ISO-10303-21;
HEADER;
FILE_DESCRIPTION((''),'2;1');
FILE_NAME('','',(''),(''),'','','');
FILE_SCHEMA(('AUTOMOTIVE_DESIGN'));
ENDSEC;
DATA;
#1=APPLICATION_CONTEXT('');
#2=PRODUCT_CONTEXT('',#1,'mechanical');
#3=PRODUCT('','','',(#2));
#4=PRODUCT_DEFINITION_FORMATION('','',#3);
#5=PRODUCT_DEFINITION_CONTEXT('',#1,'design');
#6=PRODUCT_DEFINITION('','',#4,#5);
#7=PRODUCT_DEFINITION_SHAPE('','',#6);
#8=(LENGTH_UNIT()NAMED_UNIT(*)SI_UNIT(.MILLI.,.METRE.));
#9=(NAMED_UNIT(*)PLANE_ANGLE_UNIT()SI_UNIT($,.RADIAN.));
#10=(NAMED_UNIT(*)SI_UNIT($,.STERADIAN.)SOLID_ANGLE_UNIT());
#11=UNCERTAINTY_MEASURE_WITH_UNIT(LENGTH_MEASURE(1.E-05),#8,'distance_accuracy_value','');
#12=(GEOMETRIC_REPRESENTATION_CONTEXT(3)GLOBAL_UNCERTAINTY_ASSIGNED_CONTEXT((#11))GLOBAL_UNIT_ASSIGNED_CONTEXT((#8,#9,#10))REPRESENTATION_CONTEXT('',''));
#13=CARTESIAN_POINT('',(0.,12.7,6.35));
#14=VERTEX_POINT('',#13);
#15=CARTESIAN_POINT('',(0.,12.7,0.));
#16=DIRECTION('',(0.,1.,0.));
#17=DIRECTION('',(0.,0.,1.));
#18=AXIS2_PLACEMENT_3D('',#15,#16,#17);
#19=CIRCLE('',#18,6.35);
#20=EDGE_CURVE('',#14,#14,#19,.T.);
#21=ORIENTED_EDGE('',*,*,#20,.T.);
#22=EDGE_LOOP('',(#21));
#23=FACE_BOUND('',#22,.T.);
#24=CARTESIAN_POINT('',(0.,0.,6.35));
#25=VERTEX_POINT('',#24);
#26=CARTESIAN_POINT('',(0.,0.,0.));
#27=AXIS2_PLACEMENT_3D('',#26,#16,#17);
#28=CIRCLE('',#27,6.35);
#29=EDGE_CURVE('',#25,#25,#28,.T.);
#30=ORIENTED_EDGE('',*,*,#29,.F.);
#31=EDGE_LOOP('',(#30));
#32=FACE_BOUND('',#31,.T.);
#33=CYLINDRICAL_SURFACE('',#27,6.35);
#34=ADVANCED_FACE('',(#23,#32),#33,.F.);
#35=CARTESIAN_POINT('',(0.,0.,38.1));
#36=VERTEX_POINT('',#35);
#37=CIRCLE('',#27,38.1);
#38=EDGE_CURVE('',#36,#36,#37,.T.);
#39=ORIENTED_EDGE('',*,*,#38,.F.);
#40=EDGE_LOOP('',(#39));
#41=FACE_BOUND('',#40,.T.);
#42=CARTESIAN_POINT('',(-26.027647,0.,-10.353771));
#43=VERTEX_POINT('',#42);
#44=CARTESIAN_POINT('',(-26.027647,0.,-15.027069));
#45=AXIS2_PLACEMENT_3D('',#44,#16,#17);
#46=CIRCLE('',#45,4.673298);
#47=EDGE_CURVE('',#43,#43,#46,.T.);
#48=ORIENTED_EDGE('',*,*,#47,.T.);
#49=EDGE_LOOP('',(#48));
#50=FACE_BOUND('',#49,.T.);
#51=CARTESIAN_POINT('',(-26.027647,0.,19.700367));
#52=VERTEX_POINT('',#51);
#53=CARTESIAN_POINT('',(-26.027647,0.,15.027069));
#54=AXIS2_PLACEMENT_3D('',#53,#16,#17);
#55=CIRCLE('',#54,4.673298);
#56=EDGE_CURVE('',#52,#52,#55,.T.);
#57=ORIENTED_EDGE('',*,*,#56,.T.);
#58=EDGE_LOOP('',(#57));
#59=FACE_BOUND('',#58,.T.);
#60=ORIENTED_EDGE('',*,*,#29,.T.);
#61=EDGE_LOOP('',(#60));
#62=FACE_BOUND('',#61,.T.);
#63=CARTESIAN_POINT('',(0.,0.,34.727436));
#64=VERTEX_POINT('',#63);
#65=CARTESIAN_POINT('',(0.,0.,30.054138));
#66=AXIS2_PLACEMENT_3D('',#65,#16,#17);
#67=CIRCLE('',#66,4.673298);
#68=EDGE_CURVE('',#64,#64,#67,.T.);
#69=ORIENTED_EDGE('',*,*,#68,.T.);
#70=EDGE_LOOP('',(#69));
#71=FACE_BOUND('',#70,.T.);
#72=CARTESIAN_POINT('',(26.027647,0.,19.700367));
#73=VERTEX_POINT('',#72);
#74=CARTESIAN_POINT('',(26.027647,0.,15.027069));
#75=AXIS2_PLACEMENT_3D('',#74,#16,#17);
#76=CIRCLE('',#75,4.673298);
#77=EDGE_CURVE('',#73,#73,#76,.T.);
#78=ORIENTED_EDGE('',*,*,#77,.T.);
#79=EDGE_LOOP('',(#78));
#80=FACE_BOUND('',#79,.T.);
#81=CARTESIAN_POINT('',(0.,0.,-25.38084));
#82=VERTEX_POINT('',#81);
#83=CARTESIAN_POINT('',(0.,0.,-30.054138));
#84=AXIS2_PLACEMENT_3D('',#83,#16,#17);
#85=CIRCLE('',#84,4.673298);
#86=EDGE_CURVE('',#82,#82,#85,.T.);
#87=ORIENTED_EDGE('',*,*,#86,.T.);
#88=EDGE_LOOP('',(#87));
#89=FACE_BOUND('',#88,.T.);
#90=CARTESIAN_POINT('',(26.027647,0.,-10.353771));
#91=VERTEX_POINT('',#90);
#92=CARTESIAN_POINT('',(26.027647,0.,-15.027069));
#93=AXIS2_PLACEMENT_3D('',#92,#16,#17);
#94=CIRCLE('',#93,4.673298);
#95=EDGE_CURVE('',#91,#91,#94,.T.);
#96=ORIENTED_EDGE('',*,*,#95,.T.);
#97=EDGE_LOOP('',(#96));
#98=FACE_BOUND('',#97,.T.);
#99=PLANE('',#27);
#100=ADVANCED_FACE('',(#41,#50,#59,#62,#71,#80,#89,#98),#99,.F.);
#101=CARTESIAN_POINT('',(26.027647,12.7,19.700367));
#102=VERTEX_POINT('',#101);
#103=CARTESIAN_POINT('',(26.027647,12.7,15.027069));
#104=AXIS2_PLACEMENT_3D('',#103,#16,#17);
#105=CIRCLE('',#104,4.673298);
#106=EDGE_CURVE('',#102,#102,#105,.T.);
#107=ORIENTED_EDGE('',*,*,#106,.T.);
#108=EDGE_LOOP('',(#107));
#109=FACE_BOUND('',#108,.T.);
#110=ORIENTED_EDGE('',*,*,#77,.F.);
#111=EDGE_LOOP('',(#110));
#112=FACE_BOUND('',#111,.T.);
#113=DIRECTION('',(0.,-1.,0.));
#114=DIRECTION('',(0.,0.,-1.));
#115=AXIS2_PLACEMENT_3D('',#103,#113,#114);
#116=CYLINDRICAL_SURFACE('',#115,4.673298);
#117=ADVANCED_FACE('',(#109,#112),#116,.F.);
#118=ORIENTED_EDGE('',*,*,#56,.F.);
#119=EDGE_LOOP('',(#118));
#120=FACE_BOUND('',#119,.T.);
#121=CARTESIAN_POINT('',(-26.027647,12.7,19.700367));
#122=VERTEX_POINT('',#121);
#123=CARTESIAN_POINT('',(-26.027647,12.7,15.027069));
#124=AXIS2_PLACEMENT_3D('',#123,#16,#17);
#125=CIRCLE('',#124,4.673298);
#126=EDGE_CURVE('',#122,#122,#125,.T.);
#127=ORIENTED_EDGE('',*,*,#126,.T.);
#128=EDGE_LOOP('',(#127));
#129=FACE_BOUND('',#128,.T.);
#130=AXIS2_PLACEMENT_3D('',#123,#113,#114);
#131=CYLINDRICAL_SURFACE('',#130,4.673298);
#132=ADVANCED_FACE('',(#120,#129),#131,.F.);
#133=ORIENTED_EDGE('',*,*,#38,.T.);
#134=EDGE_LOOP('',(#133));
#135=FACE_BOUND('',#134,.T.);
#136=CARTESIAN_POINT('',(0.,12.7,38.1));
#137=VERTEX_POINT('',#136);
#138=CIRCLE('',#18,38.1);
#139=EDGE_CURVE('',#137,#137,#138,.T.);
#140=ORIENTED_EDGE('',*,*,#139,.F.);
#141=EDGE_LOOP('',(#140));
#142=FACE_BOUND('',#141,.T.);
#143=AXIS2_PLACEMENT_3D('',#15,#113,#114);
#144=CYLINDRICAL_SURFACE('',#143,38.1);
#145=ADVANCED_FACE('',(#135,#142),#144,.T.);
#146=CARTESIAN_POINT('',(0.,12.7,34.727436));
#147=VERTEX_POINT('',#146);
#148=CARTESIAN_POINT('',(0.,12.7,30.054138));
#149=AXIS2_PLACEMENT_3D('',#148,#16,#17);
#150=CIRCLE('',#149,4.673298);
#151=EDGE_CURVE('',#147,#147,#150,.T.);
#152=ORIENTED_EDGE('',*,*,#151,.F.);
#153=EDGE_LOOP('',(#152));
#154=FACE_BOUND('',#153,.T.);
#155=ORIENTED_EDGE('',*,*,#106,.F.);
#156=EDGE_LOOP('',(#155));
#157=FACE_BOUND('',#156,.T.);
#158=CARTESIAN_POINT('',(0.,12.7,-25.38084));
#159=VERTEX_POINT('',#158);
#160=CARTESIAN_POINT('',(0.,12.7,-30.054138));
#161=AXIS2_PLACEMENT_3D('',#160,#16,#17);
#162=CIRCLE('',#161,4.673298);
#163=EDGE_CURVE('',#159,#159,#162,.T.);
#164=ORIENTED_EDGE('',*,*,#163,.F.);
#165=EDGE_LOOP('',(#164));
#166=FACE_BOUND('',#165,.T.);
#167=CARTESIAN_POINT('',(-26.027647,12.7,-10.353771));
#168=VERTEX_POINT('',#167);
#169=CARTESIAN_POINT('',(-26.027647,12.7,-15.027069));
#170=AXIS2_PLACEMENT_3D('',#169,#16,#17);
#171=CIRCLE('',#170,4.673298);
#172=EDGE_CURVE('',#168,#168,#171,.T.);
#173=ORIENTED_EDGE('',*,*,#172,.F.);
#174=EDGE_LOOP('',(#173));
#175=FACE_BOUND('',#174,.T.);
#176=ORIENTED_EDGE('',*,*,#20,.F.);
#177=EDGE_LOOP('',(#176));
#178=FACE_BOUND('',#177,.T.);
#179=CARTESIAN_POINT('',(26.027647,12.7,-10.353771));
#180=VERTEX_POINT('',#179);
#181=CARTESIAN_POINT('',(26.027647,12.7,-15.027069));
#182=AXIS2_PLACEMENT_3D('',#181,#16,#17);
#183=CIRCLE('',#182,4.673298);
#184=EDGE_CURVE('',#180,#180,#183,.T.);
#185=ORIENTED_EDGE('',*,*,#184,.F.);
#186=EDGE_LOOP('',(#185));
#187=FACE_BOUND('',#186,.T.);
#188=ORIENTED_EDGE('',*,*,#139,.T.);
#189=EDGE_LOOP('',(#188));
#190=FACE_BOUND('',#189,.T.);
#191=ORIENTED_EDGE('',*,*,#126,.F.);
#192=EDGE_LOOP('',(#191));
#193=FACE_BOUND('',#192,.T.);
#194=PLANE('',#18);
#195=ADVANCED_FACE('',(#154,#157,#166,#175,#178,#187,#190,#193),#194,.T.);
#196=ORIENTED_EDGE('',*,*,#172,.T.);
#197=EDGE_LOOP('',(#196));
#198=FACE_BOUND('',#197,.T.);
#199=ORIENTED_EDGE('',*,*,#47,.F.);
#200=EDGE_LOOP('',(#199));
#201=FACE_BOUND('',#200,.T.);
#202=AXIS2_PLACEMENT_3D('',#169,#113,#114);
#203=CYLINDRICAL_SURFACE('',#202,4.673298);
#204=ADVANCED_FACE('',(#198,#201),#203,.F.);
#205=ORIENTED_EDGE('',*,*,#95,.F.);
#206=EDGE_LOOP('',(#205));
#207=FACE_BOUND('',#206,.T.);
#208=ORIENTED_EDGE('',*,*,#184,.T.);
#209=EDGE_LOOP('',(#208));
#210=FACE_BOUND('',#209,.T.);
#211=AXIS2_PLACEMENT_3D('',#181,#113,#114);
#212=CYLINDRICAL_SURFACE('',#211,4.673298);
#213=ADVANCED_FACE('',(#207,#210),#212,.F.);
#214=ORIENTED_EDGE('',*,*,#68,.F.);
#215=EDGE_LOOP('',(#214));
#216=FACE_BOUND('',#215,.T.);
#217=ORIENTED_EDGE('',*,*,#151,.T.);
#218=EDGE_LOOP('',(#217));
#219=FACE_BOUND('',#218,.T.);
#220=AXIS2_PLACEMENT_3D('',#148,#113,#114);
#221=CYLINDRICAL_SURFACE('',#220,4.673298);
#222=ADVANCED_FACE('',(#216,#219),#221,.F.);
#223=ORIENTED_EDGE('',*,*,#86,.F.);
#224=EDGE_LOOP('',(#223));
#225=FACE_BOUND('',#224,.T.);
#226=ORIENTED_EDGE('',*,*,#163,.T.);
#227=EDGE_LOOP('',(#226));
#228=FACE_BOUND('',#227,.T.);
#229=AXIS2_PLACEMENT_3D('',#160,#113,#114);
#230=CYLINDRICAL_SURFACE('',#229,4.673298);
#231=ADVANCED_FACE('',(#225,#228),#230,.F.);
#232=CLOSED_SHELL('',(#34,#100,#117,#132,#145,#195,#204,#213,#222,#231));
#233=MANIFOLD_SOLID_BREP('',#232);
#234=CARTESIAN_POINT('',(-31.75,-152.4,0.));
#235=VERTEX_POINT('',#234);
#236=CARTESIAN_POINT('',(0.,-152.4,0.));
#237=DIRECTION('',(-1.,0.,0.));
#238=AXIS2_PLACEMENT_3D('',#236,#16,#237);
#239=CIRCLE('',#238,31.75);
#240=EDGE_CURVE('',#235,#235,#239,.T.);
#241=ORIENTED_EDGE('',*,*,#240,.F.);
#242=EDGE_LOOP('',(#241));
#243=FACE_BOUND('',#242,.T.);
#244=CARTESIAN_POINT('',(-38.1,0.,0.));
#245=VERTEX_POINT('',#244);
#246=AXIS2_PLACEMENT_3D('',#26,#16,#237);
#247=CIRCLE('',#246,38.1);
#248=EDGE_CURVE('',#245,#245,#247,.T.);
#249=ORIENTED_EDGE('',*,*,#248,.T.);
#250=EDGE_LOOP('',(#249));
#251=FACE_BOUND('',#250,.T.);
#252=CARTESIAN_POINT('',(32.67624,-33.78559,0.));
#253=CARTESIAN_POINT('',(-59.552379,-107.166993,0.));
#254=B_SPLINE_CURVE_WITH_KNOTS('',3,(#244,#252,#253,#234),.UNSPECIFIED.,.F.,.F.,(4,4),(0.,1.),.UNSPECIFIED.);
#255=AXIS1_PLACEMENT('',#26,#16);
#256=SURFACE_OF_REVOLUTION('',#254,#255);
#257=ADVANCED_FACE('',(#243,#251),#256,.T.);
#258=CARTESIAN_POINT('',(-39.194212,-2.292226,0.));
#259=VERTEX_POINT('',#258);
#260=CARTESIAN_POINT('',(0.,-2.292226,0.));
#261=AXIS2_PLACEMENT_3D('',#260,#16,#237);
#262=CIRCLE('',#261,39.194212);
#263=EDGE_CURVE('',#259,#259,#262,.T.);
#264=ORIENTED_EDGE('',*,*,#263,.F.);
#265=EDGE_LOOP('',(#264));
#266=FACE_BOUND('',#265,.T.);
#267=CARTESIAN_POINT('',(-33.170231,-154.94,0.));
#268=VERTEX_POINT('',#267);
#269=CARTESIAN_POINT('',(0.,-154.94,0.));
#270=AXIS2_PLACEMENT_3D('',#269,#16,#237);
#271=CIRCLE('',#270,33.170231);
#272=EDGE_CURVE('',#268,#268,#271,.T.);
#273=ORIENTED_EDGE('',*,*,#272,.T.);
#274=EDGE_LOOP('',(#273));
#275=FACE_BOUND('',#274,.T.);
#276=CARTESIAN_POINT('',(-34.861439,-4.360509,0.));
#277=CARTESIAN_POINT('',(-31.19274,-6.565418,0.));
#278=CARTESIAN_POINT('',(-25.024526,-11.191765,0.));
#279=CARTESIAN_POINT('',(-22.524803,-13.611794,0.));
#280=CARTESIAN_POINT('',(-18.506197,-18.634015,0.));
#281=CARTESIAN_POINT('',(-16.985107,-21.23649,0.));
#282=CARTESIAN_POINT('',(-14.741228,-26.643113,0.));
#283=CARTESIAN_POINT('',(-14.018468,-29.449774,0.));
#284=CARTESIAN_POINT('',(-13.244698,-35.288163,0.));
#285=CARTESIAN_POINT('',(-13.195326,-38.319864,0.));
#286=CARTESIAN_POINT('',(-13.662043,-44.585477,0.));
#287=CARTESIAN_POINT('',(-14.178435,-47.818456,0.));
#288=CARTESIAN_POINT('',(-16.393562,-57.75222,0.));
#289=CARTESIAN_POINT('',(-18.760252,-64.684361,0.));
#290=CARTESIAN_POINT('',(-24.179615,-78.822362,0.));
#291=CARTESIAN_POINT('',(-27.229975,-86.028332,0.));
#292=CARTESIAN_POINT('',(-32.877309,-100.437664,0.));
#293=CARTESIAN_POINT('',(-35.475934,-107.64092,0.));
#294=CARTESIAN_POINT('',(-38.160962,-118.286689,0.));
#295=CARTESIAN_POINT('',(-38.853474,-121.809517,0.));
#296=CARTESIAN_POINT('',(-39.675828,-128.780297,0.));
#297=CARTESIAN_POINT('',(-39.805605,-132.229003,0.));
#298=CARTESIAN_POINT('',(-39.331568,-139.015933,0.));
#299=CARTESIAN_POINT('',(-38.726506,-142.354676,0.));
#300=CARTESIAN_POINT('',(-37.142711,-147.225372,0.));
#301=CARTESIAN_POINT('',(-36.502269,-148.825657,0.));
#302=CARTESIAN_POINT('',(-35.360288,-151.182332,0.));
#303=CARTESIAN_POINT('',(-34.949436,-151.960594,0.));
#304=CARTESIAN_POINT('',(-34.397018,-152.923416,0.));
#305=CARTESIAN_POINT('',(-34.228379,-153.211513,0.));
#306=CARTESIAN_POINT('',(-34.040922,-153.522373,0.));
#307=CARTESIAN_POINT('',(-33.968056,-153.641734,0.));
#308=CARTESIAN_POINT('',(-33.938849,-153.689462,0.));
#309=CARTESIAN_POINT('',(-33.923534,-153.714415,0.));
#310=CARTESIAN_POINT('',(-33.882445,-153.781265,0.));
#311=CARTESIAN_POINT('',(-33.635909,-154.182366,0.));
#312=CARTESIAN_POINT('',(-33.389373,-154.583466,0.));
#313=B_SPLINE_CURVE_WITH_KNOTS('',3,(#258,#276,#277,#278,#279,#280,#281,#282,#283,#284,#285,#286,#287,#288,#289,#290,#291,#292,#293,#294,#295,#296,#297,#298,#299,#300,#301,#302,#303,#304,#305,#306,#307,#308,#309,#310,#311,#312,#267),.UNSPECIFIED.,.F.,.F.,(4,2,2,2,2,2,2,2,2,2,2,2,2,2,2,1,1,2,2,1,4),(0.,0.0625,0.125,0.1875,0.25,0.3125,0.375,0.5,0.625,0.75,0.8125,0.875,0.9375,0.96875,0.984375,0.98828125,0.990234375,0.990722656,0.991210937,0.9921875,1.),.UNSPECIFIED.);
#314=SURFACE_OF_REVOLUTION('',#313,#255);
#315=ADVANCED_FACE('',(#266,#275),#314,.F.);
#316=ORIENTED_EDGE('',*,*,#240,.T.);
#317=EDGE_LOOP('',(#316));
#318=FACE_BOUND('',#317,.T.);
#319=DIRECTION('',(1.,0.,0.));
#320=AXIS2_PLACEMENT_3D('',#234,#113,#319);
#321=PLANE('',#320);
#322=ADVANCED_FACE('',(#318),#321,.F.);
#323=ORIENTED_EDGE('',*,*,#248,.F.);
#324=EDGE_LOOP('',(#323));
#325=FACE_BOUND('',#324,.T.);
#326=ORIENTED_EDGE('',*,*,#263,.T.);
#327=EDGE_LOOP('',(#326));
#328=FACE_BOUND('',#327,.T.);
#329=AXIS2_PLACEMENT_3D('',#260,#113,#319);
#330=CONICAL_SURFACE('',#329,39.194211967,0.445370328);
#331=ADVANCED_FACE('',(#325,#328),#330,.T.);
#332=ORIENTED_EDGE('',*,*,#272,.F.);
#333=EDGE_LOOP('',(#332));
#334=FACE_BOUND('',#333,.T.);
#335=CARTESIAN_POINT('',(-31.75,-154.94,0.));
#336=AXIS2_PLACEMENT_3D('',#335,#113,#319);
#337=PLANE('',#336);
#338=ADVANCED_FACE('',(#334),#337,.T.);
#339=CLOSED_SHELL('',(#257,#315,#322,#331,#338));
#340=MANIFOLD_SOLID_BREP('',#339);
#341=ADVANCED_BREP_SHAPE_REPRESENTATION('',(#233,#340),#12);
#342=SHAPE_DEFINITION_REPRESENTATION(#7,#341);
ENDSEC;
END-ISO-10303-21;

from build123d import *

# Parameters (mm, degrees)
SKETCH1_R                 = 38.1
SKETCH1_R_2               = 4.673297919
BOSS_EXTRUDE1_DEPTH       = 12.7
REVOLVE_THIN2_OUTLINE_W   = 31.75
REVOLVE_THIN2_OUTLINE_H   = 2.54
REVOLVE_THIN2_OUTLINE_W_2 = 1.420230581
SKETCH3_R                 = 6.35
CUT_EXTRUDE1_DEPTH        = 12.7


# Read off the part's stored shape, not the designer's step: Revolve-Thin2
with BuildPart() as part:
    # Sketch1 → Boss-Extrude1 (new body)
    with BuildSketch(Plane(origin=(0, 0, 0), x_dir=(1, 0, 0), z_dir=(0, 1, 0))):
        with Locations(Location((0, 0, 0), (0, 0, 270))):
            Circle(SKETCH1_R)
        with Locations(Location((0, 30.054137764, 0), (0, 0, 270))):
            Circle(SKETCH1_R_2, mode=Mode.SUBTRACT)
        with Locations(Location((26.027646793, 15.027068882, 0), (0, 0, 270))):
            Circle(SKETCH1_R_2, mode=Mode.SUBTRACT)
        with Locations(Location((26.027646793, -15.027068882, 0), (0, 0, 270))):
            Circle(SKETCH1_R_2, mode=Mode.SUBTRACT)
        with Locations(Location((0, -30.054137764, 0), (0, 0, 270))):
            Circle(SKETCH1_R_2, mode=Mode.SUBTRACT)
        with Locations(Location((-26.027646793, -15.027068882, 0), (0, 0, 270))):
            Circle(SKETCH1_R_2, mode=Mode.SUBTRACT)
        with Locations(Location((-26.027646793, 15.027068882, 0), (0, 0, 270))):
            Circle(SKETCH1_R_2, mode=Mode.SUBTRACT)
    extrude(amount=BOSS_EXTRUDE1_DEPTH)

    # Sketch3 → Cut-Extrude1 (cut)
    with BuildSketch(Plane(origin=(0, 12.7, 0), x_dir=(1, 0, 0), z_dir=(0, 1, 0))):
        with Locations(Location((0, 0, 0), (0, 0, 270))):
            Circle(SKETCH3_R)
    extrude(amount=-CUT_EXTRUDE1_DEPTH, mode=Mode.SUBTRACT)


with BuildPart() as body_2:
    # Revolve-Thin2 outline → Revolve-Thin2 (revolve)
    with BuildSketch(Plane.XY):
        with BuildLine():
            Line((38.1, -2.292226029), (38.1, 0))
            add(Edge.make_bspline(
                [(38.1, 0), (36.539197313, -0.745061332), (35.057666949, -1.509378852), (33.652373459, -2.292226029)],
                knots=[0, 0, 0, 0, 0.022052636, 0.022052636, 0.022052636, 0.022052636], degree=3))
            Line((33.652373459, -2.292226029), (38.1, -2.292226029))
        make_face()
        Polygon((39.194211967, -2.292226029), (38.1, 0), (38.1, -2.292226029), align=None)
        with BuildLine():
            Line((38.1, -2.292226029), (33.652373459, -2.292226029))
            add(Edge.make_bspline(
                [(33.652373459, -2.292226029), (33.490651057, -2.382316766), (33.329938307, -2.472652902), (33.170230581, -2.56323333)],
                knots=[0.022052636, 0.022052636, 0.022052636, 0.022052636, 0.024590473, 0.024590473, 0.024590473, 0.024590473], degree=3))
            Line((33.170230581, -2.56323333), (33.170230581, -5.501288375))
            add(Edge.make_bspline(
                [(38.1, -2.82441559), (36.344967316, -3.694174846), (34.703616491, -4.587145765), (33.170230581, -5.501288375)],
                knots=[0.005330764, 0.005330764, 0.005330764, 0.005330764, 0.031323112, 0.031323112, 0.031323112, 0.031323112], degree=3))
            Line((38.1, -2.82441559), (38.1, -2.292226029))
        make_face()
        with BuildLine():
            add(Edge.make_bspline(
                [(39.194211967, -2.292226029), (38.824660103, -2.468634494), (38.459939219, -2.64603688), (38.1, -2.82441559)],
                knots=[0, 0, 0, 0, 0.005330764, 0.005330764, 0.005330764, 0.005330764], degree=3))
            Line((39.194211967, -2.292226029), (38.1, -2.292226029))
            Line((38.1, -2.292226029), (38.1, -2.82441559))
        make_face()
        with BuildLine():
            Line((33.170230581, -5.501288375), (33.170230581, -2.56323333))
            add(Edge.make_bspline(
                [(33.170230581, -2.56323333), (32.687688134, -2.836913901), (32.214320475, -3.112824595), (31.75, -3.390934871)],
                knots=[0.024590473, 0.024590473, 0.024590473, 0.024590473, 0.032258317, 0.032258317, 0.032258317, 0.032258317], degree=3))
            Line((31.75, -3.390934871), (31.75, -6.373378427))
            add(Edge.make_bspline(
                [(33.170230581, -5.501288375), (32.686118905, -5.78989616), (32.21276868, -6.080614242), (31.75, -6.373378427)],
                knots=[0.031323112, 0.031323112, 0.031323112, 0.031323112, 0.039529265, 0.039529265, 0.039529265, 0.039529265], degree=3))
        make_face()
        with BuildLine():
            Line((39.194211967, -139.075003135), (39.194211967, -124.719049732))
            add(Edge.make_bspline(
                [(38.1, -118.322164828), (38.555159427, -120.466291268), (38.925786358, -122.599458417), (39.194211967, -124.719049732)],
                knots=[0.771095938, 0.771095938, 0.771095938, 0.771095938, 0.809059932, 0.809059932, 0.809059932, 0.809059932], degree=3))
            Line((38.1, -118.322164828), (38.1, -144.18985569))
            add(Edge.make_bspline(
                [(39.194211967, -139.075003135), (38.938120201, -140.799443905), (38.577139446, -142.506069221), (38.1, -144.18985569)],
                knots=[0.896322274, 0.896322274, 0.896322274, 0.896322274, 0.928477073, 0.928477073, 0.928477073, 0.928477073], degree=3))
        make_face()
        with BuildLine():
            add(Edge.make_bspline(
                [(39.194211967, -124.719049732), (39.218535072, -124.911114272), (39.242019012, -125.103067342), (39.537567265, -127.608316448), (39.686511355, -129.905563915), (39.686511354, -132.181223793)],
                knots=[0.809059932, 0.809059932, 0.809059932, 0.809059932, 0.8125, 0.8125, 0.853984044, 0.853984044, 0.853984044, 0.853984044], degree=3))
            Line((39.194211967, -124.719049732), (39.194211967, -139.075003135))
            add(Edge.make_bspline(
                [(39.686511354, -132.181223793), (39.686511353, -133.334080702), (39.648285306, -134.481397223), (39.487725952, -136.780170301), (39.364029809, -137.931503617), (39.194211967, -139.075003135)],
                knots=[0.853984044, 0.853984044, 0.853984044, 0.853984044, 0.875, 0.875, 0.896322274, 0.896322274, 0.896322274, 0.896322274], degree=3))
        make_face()
        with BuildLine():
            Line((31.75, -6.373378427), (31.75, -3.390934871))
            add(Edge.make_bspline(
                [(31.75, -3.390934871), (-8.411459711, -27.446119247), (19.112756517, -67.957268122), (31.75, -105.160741295)],
                knots=[0.032258317, 0.032258317, 0.032258317, 0.032258317, 0.695489473, 0.695489473, 0.695489473, 0.695489473], degree=3))
            Line((31.75, -105.160741295), (31.75, -97.644710533))
            add(Edge.make_bspline(
                [(31.75, -6.373378427), (30.454613848, -7.192886502), (29.242140125, -8.028426952), (25.024525947, -11.19176543), (22.52480318, -13.611794296), (18.506197427, -18.634015258), (16.985107262, -21.236489796), (14.741227924, -26.643112888), (14.018468362, -29.449773942), (13.244697696, -35.288163279), (13.195326219, -38.319864475), (13.66204339, -44.585476721), (14.178435247, -47.818456499), (16.393561816, -57.752220302), (18.760252087, -64.684360956), (24.179615, -78.82236222), (27.229974955, -86.028332185), (30.630130329, -94.703924675), (31.197238405, -96.174792352), (31.75, -97.644710533)],
                knots=[0.039529265, 0.039529265, 0.039529265, 0.039529265, 0.0625, 0.0625, 0.125, 0.125, 0.1875, 0.1875, 0.25, 0.25, 0.3125, 0.3125, 0.375, 0.375, 0.5, 0.5, 0.625, 0.625, 0.650520379, 0.650520379, 0.650520379, 0.650520379], degree=3))
        make_face()
        with BuildLine():
            Line((38.1, -144.18985569), (38.1, -118.322164828))
            add(Edge.make_bspline(
                [(33.170230581, -101.515907435), (34.751629562, -105.947270442), (36.162444489, -110.362841801), (37.568049279, -115.935872582), (37.847075753, -117.130710728), (38.1, -118.322164828)],
                knots=[0.672940205, 0.672940205, 0.672940205, 0.672940205, 0.75, 0.75, 0.771095938, 0.771095938, 0.771095938, 0.771095938], degree=3))
            Line((33.170230581, -101.515907435), (33.170230581, -109.544472525))
            add(Edge.make_bspline(
                [(33.170230581, -109.544472525), (37.611754839, -124.008078255), (39.267693579, -137.844187385), (33.170230581, -149.863760519)],
                knots=[0.721638111, 0.721638111, 0.721638111, 0.721638111, 0.981519206, 0.981519206, 0.981519206, 0.981519206], degree=3))
            Line((33.170230581, -149.863760519), (33.170230581, -152.4))
            Line((33.170230581, -152.4), (34.69514339, -152.4))
            add(Edge.make_bspline(
                [(38.1, -144.18985569), (37.966110371, -144.66234135), (37.823074241, -145.133028648), (37.14271093, -147.22537189), (36.502268631, -148.825657092), (35.414709578, -151.07002332), (35.066294719, -151.737914019), (34.69514339, -152.4)],
                knots=[0.928477073, 0.928477073, 0.928477073, 0.928477073, 0.9375, 0.9375, 0.96875, 0.96875, 0.98214115, 0.98214115, 0.98214115, 0.98214115], degree=3))
        make_face()
        with BuildLine():
            Line((31.75, -97.644710533), (31.75, -105.160741295))
            add(Edge.make_bspline(
                [(31.75, -105.160741295), (32.248237614, -106.627530291), (32.723334622, -108.089177771), (33.170230581, -109.544472525)],
                knots=[0.695489473, 0.695489473, 0.695489473, 0.695489473, 0.721638111, 0.721638111, 0.721638111, 0.721638111], degree=3))
            Line((33.170230581, -109.544472525), (33.170230581, -101.515907435))
            add(Edge.make_bspline(
                [(31.75, -97.644710533), (32.235604801, -98.936043601), (32.710137359, -100.226643871), (33.170230581, -101.515907435)],
                knots=[0.650520379, 0.650520379, 0.650520379, 0.650520379, 0.672940205, 0.672940205, 0.672940205, 0.672940205], degree=3))
        make_face()
        with Locations((15.875, -153.67)):
            Rectangle(REVOLVE_THIN2_OUTLINE_W, REVOLVE_THIN2_OUTLINE_H)
        with BuildLine():
            add(Edge.make_bspline(
                [(33.170230581, -149.863760519), (32.736624745, -150.718502411), (32.263810051, -151.564058104), (31.75, -152.4)],
                knots=[0.981519206, 0.981519206, 0.981519206, 0.981519206, 1, 1, 1, 1], degree=3))
            Line((31.75, -152.4), (33.170230581, -152.4))
            Line((33.170230581, -152.4), (33.170230581, -149.863760519))
        make_face()
        with Locations((32.460115291, -153.67)):
            Rectangle(REVOLVE_THIN2_OUTLINE_W_2, REVOLVE_THIN2_OUTLINE_H)
        with BuildLine():
            add(Edge.make_bspline(
                [(34.69514339, -152.4), (34.633229636, -152.51044613), (34.570683187, -152.620730731), (34.397017878, -152.92341622), (34.228379289, -153.211512947), (34.040921715, -153.522373425), (33.968056415, -153.641733741), (33.938848947, -153.689461715), (33.923533911, -153.71441515), (33.882444639, -153.781265233), (33.635909003, -154.182365729), (33.389373368, -154.583466226), (33.170230581, -154.94)],
                knots=[0.98214115, 0.98214115, 0.98214115, 0.98214115, 0.984375, 0.984375, 0.98828125, 0.990234375, 0.990722656, 0.990722656, 0.991210937, 0.991210937, 0.9921875, 1, 1, 1, 1], degree=3))
            Line((34.69514339, -152.4), (33.170230581, -152.4))
            Line((33.170230581, -152.4), (33.170230581, -154.94))
        make_face()
    revolve(axis=Axis((0, 0, 0), (0, 1, 0)))


solid = Compound([part.part, body_2.part])
